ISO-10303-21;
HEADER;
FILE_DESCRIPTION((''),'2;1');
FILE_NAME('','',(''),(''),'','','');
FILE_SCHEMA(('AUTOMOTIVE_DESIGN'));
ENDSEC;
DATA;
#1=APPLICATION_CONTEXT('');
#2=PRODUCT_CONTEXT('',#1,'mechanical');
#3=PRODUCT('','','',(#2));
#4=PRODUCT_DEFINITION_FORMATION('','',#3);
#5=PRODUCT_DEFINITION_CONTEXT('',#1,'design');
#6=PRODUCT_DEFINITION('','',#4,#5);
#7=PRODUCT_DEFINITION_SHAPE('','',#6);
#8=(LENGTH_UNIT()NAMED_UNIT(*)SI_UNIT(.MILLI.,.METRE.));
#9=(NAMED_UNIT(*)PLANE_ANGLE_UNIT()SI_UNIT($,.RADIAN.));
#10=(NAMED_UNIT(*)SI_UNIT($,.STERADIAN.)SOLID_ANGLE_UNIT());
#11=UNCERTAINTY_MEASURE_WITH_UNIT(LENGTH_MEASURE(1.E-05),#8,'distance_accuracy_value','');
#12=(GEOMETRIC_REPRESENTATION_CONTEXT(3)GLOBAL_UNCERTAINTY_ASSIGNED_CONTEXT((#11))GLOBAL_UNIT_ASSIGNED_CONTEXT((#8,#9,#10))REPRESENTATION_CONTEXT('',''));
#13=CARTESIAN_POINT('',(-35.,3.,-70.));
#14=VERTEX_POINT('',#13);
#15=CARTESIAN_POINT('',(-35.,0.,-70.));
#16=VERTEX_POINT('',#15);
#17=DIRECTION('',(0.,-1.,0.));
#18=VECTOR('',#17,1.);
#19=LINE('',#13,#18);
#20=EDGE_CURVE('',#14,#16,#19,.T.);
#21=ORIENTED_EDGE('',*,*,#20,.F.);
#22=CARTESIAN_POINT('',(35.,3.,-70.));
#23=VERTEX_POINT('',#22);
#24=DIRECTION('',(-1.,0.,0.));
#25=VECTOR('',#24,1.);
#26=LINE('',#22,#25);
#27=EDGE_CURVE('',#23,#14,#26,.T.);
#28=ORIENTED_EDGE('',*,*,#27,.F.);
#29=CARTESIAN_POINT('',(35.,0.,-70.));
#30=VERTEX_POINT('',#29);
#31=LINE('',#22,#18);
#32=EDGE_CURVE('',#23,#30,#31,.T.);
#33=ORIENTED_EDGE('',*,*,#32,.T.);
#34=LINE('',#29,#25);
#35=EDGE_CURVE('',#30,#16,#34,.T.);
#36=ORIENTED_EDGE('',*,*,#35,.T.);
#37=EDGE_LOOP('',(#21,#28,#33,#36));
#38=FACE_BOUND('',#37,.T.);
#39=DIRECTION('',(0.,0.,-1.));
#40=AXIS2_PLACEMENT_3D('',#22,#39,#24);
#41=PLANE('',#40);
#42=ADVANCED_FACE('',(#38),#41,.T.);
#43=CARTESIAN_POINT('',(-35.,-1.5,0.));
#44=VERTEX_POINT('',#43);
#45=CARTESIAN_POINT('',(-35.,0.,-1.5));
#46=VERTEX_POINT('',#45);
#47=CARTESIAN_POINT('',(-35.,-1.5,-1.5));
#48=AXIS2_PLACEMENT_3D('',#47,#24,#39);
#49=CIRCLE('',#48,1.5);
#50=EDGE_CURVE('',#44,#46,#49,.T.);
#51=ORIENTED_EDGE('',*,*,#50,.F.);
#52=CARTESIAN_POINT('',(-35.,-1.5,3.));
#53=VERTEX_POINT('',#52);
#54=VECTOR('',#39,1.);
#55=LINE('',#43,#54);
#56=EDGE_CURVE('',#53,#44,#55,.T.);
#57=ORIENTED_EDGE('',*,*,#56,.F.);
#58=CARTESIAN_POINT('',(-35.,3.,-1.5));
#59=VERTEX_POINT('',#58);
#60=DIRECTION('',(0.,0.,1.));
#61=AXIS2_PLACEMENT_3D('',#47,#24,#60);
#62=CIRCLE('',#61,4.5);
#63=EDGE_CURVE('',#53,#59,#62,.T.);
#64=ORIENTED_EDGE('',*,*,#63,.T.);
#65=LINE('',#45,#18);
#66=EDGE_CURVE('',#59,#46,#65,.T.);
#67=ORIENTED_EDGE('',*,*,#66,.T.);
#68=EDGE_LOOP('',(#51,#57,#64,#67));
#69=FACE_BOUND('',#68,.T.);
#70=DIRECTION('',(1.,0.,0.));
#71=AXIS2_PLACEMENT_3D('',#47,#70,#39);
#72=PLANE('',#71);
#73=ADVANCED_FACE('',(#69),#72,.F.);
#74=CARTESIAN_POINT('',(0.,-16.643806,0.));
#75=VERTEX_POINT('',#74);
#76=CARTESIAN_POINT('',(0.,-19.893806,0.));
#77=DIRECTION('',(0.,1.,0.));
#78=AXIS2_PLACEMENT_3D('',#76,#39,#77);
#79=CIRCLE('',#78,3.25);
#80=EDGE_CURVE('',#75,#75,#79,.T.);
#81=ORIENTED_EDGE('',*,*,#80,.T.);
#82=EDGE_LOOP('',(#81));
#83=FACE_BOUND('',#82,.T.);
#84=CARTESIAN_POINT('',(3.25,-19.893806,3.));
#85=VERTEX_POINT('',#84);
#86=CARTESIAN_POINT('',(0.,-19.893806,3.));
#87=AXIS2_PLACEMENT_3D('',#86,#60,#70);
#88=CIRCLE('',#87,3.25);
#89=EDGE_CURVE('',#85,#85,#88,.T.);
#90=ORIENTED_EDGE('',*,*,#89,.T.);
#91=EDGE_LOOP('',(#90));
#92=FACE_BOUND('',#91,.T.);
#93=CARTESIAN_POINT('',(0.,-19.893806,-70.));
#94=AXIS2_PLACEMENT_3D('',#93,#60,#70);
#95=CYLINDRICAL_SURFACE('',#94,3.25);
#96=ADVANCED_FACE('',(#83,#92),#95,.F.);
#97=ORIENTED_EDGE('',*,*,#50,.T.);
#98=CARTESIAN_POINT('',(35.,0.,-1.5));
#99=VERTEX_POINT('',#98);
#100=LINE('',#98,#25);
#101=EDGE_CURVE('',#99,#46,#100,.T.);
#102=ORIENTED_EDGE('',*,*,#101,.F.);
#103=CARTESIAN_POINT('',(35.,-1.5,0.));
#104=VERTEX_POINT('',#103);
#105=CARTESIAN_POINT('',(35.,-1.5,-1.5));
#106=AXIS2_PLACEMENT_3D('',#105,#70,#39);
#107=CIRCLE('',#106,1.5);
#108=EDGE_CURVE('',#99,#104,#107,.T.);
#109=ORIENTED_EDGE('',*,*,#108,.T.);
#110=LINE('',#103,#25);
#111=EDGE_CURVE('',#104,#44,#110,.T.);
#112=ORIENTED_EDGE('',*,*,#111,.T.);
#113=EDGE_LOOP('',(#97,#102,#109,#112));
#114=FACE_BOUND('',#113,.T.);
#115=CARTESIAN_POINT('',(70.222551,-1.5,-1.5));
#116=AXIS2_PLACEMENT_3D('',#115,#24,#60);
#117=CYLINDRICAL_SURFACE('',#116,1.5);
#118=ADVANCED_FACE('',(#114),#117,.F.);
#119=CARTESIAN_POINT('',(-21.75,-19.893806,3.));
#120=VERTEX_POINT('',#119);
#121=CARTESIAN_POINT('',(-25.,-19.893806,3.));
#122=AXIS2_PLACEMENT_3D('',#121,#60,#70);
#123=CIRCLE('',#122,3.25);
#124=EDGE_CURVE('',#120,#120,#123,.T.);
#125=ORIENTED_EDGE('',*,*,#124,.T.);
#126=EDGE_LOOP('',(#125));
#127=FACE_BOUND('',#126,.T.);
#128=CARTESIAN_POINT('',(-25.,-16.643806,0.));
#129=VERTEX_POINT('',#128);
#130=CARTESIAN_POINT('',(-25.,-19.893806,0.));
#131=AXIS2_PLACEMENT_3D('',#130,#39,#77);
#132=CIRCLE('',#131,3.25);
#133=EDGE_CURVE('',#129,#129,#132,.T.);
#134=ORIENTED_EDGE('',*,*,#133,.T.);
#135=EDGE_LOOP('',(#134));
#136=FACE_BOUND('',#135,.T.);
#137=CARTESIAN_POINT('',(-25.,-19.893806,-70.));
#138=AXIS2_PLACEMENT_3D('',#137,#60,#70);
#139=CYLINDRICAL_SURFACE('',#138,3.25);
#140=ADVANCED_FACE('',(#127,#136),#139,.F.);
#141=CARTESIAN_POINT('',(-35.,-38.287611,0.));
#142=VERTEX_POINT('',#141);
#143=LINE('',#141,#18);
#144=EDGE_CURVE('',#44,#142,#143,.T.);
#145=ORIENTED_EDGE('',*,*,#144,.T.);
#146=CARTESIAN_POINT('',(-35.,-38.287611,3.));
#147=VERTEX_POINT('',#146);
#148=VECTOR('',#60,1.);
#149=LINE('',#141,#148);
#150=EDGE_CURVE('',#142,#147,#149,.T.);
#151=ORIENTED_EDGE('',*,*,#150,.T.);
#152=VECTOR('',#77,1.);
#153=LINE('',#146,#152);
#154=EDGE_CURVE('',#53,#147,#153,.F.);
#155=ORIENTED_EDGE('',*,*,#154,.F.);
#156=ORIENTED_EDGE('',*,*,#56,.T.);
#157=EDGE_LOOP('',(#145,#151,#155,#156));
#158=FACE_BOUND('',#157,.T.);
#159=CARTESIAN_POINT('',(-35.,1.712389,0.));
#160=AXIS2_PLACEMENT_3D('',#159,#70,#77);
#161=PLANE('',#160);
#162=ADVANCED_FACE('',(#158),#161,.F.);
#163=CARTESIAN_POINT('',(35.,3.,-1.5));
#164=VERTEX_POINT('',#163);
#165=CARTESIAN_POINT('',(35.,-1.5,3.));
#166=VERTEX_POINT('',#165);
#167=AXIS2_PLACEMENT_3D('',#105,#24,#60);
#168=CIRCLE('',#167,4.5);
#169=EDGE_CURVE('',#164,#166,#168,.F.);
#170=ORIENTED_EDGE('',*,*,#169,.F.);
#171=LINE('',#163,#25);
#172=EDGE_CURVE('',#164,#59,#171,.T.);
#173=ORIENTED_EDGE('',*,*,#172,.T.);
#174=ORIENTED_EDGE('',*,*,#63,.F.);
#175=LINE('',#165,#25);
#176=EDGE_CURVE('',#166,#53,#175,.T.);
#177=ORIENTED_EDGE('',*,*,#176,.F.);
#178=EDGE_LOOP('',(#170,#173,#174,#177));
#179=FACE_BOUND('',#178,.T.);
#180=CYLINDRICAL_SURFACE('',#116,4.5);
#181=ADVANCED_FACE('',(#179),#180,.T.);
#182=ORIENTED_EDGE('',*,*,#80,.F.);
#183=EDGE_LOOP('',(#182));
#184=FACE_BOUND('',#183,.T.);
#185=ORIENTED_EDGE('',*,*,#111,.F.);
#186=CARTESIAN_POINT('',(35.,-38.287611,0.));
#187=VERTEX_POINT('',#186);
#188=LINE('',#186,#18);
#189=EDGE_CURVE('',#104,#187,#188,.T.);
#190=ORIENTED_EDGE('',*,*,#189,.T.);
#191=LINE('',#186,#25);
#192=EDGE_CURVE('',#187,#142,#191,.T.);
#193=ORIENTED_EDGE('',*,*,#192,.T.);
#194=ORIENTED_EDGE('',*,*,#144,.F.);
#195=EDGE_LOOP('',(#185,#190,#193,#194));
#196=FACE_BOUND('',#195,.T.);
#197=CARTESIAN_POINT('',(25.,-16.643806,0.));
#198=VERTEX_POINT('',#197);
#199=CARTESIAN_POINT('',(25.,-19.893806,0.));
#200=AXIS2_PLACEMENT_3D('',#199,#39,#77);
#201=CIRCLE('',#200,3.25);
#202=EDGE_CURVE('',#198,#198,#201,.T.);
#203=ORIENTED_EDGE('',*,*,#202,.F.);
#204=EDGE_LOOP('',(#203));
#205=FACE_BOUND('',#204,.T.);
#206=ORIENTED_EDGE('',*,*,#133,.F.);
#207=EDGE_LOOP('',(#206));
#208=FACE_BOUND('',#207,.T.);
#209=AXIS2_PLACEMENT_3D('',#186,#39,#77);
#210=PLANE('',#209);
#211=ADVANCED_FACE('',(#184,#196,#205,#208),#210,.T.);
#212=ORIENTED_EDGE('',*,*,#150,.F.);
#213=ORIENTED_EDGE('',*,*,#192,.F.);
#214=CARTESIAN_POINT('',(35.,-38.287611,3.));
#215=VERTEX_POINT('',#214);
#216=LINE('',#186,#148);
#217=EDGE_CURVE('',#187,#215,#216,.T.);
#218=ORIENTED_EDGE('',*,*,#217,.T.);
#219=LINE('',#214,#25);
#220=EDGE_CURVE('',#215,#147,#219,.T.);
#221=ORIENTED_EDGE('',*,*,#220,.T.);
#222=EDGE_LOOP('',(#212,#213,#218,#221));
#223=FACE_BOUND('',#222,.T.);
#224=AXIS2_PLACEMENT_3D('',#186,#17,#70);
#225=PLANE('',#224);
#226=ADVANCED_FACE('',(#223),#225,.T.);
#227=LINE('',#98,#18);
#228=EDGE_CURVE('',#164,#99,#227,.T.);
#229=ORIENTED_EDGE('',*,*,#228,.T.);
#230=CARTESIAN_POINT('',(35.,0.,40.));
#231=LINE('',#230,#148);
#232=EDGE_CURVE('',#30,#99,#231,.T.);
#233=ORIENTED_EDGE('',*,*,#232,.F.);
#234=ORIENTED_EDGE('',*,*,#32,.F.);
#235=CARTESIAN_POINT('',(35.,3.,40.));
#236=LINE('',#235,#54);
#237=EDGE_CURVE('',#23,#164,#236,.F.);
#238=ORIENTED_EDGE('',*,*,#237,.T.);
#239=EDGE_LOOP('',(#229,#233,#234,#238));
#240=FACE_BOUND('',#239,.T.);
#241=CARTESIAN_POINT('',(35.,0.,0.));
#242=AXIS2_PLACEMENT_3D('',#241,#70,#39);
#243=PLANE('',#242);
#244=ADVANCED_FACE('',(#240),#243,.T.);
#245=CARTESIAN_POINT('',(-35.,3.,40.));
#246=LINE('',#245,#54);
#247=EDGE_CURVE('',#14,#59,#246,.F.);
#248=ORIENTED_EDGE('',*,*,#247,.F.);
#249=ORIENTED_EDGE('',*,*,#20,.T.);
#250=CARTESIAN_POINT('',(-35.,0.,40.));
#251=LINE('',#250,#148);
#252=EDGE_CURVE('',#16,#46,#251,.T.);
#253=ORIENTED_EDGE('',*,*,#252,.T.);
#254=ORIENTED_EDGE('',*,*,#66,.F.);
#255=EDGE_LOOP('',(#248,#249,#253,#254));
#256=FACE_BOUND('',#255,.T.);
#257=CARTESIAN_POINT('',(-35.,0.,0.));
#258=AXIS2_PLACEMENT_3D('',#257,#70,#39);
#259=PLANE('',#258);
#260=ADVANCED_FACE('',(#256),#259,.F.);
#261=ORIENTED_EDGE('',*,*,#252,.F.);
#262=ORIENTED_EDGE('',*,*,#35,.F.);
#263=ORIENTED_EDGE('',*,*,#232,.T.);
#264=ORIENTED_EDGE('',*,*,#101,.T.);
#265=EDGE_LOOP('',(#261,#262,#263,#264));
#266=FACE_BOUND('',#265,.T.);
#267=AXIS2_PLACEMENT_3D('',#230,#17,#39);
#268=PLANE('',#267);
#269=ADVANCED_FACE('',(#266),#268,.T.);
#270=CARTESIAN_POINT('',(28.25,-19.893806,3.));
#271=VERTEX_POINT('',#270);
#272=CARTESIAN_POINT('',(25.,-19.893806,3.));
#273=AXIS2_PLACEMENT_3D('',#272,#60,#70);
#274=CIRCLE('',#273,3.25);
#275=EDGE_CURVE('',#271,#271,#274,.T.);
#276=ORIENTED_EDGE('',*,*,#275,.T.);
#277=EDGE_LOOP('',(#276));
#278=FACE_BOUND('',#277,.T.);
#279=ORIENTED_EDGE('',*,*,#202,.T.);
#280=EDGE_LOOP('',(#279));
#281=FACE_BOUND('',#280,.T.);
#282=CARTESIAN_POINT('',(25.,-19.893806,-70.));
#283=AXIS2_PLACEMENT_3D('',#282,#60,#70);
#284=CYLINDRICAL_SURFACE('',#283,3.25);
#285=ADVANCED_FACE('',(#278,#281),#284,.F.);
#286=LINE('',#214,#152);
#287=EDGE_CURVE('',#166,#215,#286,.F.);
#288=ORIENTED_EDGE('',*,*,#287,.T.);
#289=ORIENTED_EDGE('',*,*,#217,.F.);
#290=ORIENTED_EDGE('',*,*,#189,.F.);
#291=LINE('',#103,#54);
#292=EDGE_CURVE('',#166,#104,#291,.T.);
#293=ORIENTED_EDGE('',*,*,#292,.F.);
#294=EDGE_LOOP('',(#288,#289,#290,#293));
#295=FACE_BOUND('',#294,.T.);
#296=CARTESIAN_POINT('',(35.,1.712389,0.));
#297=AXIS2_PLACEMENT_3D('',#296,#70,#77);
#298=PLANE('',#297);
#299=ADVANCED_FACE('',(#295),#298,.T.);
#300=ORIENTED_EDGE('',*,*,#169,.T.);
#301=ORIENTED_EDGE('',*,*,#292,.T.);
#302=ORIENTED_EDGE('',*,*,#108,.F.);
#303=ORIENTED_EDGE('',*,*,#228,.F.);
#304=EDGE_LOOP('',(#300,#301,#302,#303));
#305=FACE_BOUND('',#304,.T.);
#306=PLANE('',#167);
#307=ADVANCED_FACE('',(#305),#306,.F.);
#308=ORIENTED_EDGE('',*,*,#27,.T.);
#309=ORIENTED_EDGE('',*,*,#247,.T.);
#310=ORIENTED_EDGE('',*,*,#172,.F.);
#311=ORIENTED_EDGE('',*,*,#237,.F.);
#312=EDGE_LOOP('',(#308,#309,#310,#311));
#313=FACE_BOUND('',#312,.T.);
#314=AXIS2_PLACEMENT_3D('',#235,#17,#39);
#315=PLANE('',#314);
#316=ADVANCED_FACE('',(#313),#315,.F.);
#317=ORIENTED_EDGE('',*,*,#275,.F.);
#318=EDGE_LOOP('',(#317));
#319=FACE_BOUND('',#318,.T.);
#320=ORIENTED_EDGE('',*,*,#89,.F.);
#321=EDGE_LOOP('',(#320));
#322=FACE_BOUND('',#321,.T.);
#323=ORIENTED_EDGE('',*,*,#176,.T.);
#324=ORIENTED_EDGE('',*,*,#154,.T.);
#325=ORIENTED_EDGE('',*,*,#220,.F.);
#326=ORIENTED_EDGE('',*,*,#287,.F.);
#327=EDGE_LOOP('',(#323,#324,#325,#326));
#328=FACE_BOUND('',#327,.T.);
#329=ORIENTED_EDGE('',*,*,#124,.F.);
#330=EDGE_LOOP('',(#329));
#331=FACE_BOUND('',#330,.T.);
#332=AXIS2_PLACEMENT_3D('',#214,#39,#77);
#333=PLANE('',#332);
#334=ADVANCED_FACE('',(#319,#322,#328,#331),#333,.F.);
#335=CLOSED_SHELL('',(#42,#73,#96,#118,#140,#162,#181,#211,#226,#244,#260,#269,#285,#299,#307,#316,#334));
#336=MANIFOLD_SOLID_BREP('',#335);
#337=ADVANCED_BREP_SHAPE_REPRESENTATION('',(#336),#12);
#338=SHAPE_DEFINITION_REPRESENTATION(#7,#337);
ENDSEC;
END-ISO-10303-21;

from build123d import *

# Parameters (mm, degrees)
SKETCH_1_W             = 110
SKETCH_1_H             = 3
SM_BASE_FLANGE_1_DEPTH = 35
OTHER_START            = -35
OTHER_1_DEPTH          = 70
OTHER_1_2_DEPTH        = 70
SKETCH_9_R             = 3.25
CUT_EXTRUDE_3_DEPTH    = 90.55412418


# Read off the part's stored shape, not the designer's step: Нарисованный сгиб1
# Sheet-metal steps are written as plain solids
with BuildPart() as part:
    # Sketch 1 → Базовая кромка1 (new, symmetric)
    with BuildSketch(Plane(origin=(0, 0, 0), x_dir=(0, 0, -1), z_dir=(1, 0, 0))):
        with Locations((15, 1.5)):
            Rectangle(SKETCH_1_W, SKETCH_1_H)
    extrude(amount=SM_BASE_FLANGE_1_DEPTH, both=True)

    # Other 1 outline → Other 1 (cut)
    with BuildSketch(Plane.YZ.offset(OTHER_START)):
        with BuildLine():
            Line((0, 40), (0, 2.742640687))
            ThreePointArc((0, 2.742640687), (2.174234614, 1.098076211), (3, -1.5))
            Line((3, -1.5), (3, 40))
            Line((3, 40), (0, 40))
        make_face()
    extrude(amount=OTHER_1_DEPTH, mode=Mode.SUBTRACT)

    # Other 1 2 outline → Other 1 2 (add)
    with BuildSketch(Plane.YZ.offset(OTHER_START)):
        with BuildLine():
            Line((-1.5, 3), (-38.28761102, 3))
            Line((-38.28761102, 3), (-38.28761102, 0))
            Line((-38.28761102, 0), (-1.5, 0))
            ThreePointArc((-1.5, 0), (-0.439339828, -0.439339828), (0, -1.5))
            Line((0, -1.5), (0, 2.742640687))
            ThreePointArc((0, 2.742640687), (-0.739041096, 2.935193518), (-1.5, 3))
        make_face()
    extrude(amount=OTHER_1_2_DEPTH)

    # Эскиз9 → Вырез-Вытянуть3 (cut, through all)
    with BuildSketch(Plane.XY.offset(3)):
        with Locations((-25, -19.89380551)):
            Circle(SKETCH_9_R)
        with Locations((0, -19.89380551)):
            Circle(SKETCH_9_R)
        with Locations((25, -19.89380551)):
            Circle(SKETCH_9_R)
    extrude(amount=-CUT_EXTRUDE_3_DEPTH, mode=Mode.SUBTRACT)


solid = part.part
